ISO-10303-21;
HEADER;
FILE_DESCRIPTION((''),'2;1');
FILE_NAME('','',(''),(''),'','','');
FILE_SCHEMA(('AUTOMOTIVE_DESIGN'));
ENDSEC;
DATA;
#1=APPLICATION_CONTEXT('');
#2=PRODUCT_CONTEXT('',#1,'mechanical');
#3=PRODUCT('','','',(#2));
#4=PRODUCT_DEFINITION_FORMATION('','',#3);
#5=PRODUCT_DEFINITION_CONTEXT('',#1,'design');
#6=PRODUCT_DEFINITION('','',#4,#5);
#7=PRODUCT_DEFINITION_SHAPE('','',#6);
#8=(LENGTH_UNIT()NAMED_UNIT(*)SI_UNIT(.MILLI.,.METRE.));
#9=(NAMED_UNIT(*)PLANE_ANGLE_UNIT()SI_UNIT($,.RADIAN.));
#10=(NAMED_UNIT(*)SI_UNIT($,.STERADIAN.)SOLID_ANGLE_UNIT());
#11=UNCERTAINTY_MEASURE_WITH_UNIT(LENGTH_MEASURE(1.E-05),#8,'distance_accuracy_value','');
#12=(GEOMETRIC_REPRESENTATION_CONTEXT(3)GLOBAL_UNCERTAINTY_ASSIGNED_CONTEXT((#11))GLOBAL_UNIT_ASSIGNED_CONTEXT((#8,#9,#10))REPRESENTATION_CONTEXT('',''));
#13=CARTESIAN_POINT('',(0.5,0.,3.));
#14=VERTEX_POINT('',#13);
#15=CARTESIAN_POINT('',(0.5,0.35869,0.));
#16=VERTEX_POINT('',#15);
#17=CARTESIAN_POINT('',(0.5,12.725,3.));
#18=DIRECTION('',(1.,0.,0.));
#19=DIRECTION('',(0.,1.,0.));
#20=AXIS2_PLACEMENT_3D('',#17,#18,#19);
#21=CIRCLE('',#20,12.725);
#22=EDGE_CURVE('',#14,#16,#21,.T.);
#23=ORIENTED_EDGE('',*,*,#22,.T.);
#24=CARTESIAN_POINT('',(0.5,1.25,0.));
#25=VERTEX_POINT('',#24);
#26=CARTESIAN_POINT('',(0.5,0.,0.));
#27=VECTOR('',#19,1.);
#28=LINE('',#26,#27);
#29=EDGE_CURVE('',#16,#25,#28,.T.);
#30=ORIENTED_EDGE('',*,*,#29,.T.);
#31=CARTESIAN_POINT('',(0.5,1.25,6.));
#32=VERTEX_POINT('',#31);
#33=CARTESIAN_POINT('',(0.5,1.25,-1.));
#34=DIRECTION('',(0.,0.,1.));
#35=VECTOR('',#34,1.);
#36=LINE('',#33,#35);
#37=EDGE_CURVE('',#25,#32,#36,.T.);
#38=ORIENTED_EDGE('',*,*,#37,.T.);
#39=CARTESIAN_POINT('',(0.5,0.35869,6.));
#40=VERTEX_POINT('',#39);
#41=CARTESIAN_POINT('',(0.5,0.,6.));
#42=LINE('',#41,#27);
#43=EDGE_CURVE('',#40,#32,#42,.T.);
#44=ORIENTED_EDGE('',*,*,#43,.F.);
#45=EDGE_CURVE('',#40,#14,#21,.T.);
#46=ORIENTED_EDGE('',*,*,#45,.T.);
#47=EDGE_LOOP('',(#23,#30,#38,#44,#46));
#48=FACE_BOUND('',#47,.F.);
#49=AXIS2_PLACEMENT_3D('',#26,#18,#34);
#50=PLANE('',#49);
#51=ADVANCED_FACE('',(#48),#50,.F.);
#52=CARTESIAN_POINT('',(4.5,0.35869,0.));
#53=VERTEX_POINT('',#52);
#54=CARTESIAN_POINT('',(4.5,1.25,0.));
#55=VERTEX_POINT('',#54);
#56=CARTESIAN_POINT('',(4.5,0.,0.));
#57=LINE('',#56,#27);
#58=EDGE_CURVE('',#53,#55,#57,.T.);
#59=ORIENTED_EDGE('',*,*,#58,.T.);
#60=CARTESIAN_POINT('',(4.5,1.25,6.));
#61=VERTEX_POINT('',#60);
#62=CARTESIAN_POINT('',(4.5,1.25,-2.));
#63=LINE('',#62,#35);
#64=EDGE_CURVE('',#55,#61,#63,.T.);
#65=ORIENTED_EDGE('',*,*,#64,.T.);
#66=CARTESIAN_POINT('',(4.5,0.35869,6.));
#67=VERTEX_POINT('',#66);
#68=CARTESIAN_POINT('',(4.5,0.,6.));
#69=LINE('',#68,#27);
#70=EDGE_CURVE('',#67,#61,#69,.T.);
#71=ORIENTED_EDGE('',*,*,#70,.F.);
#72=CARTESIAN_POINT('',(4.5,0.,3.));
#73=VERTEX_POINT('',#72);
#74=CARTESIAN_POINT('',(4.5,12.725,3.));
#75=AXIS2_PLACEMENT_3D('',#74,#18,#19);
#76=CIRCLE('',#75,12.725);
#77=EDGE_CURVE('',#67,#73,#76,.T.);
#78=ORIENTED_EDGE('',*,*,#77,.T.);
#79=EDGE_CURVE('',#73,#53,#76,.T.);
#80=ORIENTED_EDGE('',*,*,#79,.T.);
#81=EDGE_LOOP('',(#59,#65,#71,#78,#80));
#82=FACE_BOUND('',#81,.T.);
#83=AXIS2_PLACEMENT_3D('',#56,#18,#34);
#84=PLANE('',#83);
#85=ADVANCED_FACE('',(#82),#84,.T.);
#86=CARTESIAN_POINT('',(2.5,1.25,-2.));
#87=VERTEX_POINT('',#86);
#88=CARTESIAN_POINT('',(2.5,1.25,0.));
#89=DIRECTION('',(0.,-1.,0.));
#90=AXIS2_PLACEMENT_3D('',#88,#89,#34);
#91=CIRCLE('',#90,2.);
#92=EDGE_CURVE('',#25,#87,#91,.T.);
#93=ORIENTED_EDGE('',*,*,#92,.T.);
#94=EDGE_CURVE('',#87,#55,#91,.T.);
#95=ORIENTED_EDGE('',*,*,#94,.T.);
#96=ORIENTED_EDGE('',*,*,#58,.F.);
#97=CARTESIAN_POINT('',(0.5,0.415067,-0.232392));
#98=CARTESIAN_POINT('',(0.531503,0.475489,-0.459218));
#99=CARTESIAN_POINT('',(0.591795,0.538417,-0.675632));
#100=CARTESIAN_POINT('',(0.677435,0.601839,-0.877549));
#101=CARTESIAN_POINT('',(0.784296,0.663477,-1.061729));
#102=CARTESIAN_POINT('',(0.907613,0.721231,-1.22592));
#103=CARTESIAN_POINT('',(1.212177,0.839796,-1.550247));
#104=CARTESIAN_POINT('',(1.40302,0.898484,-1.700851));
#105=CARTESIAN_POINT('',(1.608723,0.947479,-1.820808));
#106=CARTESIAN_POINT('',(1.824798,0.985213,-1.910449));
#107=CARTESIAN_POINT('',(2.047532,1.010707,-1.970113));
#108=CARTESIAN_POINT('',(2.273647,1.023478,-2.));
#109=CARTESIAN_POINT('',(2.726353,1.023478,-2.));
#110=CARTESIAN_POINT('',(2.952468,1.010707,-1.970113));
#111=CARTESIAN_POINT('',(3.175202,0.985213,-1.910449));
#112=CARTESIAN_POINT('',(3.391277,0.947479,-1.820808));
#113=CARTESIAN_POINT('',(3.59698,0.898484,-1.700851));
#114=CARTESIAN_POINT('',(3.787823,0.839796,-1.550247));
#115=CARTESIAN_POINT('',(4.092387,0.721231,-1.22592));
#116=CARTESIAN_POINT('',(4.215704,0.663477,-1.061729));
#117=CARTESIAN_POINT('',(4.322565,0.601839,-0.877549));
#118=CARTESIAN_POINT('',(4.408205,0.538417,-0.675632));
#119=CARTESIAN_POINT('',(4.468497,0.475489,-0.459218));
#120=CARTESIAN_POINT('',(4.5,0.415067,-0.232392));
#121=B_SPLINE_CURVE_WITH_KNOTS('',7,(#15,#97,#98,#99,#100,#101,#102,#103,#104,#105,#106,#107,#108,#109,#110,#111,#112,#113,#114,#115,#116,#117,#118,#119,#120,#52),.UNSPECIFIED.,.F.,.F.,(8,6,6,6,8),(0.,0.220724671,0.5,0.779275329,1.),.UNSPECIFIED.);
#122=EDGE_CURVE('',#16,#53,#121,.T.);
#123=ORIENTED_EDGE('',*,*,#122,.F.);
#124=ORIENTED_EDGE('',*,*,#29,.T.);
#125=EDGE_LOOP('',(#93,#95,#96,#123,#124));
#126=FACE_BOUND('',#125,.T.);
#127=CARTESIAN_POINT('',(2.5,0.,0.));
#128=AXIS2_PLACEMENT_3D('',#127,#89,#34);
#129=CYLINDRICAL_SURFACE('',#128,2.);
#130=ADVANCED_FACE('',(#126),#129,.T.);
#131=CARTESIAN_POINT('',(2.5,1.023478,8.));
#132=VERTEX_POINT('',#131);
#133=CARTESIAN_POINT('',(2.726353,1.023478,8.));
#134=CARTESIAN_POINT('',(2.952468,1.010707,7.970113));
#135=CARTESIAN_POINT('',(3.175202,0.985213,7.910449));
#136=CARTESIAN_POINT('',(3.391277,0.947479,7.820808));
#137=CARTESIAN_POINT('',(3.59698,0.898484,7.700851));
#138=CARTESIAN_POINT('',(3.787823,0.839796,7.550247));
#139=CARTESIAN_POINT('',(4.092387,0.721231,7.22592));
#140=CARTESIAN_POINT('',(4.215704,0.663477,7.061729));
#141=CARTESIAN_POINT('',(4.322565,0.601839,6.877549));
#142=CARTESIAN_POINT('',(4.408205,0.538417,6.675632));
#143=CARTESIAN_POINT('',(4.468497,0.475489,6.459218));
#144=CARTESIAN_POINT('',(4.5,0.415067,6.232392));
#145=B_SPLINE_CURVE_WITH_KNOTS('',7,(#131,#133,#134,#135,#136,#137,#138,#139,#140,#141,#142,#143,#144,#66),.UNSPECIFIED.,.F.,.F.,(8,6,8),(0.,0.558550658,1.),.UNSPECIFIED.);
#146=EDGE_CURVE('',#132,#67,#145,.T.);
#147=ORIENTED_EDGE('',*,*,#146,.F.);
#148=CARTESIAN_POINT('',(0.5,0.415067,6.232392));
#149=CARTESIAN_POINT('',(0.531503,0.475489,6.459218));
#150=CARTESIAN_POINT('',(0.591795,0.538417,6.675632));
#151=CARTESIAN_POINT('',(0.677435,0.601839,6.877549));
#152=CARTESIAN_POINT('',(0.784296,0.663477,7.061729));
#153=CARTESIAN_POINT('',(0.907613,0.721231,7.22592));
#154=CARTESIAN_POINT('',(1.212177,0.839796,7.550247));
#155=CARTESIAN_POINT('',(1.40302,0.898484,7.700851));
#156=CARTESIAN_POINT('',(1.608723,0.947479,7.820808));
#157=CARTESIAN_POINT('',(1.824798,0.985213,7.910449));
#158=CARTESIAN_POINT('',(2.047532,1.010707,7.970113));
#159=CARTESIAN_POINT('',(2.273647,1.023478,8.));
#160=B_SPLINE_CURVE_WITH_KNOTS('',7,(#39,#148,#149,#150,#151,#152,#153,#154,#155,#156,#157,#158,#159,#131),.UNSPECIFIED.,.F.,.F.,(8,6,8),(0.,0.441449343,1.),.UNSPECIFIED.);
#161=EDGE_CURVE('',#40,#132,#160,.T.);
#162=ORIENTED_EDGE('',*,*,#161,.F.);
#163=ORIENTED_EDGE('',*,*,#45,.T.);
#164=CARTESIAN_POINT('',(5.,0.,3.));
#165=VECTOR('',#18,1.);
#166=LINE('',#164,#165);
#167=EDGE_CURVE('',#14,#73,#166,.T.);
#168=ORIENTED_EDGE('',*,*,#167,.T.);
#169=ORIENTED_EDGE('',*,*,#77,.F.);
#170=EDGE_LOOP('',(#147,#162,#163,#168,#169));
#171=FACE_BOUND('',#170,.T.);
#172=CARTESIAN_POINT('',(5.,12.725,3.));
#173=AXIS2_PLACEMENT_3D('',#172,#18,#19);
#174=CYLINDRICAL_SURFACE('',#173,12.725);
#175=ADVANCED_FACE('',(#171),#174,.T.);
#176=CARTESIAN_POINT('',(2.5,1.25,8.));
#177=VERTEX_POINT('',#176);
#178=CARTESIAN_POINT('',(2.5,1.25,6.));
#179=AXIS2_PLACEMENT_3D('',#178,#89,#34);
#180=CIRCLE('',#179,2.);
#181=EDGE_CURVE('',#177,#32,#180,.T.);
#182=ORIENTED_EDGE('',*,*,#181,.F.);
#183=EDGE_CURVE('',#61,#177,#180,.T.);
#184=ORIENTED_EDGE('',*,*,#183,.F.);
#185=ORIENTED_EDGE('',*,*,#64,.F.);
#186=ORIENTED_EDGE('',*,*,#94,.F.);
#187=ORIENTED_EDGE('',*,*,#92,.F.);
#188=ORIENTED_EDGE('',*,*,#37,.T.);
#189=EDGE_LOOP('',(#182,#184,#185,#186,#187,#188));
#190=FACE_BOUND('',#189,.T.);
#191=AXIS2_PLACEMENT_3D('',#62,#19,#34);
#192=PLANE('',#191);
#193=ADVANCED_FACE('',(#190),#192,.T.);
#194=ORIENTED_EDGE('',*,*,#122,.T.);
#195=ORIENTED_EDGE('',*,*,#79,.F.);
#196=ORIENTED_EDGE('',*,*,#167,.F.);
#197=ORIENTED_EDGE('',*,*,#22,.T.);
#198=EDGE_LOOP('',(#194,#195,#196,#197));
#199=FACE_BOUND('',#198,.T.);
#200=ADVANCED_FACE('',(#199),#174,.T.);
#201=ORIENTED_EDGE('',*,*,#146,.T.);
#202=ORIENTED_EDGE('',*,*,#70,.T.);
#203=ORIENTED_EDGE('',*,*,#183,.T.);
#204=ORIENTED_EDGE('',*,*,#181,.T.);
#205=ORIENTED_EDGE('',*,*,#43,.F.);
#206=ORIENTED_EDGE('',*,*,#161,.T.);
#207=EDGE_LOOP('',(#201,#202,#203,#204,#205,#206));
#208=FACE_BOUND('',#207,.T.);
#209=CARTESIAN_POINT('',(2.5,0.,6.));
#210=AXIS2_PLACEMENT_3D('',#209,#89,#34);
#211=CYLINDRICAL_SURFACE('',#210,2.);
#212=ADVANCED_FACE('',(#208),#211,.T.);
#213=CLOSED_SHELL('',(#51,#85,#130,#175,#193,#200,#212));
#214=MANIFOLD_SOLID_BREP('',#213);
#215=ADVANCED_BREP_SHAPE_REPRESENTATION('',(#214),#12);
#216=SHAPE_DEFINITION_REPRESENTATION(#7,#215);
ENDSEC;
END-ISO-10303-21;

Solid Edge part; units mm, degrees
sketch "Sketch1" plane through (0, 0, 0) normal (0, -1, 0) x (1, 0, 0)
  line L0 (0, 0) -> (0, 6)
  arc A0 (0, 6) -> (5, 6) centre (2.5, 6) cw
  line L1 (5, 6) -> (5, 0)
  arc A1 (0, 0) -> (5, 0) centre (2.5, 0) ccw
extrude "Protrusion1" add sketch "Sketch1" against normal blind 2
sketch "Sketch2" plane through (5, 1, 3) normal (1, 0, 0) x (0, 1, 0)
  line L0 (1, 5.5) -> (0.25, 5.5)
  arc A0 (0.25, 5.5) -> (0.25, -5.5) centre (11.725, 0) ccw
  line L1 (1, -5.5) -> (0.25, -5.5)
  line L2 (1, 5.5) -> (1, -5.5)
extrude "ExtrudedCutout_1" cut sketch "Sketch2" against normal blind 43.2268 flip side to cut
sketch "Sketch3" plane through (2.5, 0, 3) normal (0, -1, 0) x (0, 0, 1)
  arc A0 (-3, 2) -> (-3, -2) centre (-3, 0) ccw
  line L0 (-3, -2) -> (3, -2)
  arc A1 (3, 2) -> (3, -2) centre (3, 0) cw
  line L1 (-3, 2) -> (3, 2)
extrude "ExtrudedCutout_2" cut sketch "Sketch3" against normal blind 3.7815 flip side to cut
sketch "Sketch4" plane through (4.5, 1, 3) normal (1, 0, 0) x (0, 0, 1)
  line L0 (-5, -1) -> (-5, -0.25)
  line L1 (-5, -0.25) -> (5, -0.25)
  line L2 (5, -0.25) -> (5, -1)
  line L3 (5, -1) -> (-5, -1)
extrude "ExtrudedCutout_3" cut sketch "Sketch4" against normal blind 4.4511
properties material "Glass, general industrial"
